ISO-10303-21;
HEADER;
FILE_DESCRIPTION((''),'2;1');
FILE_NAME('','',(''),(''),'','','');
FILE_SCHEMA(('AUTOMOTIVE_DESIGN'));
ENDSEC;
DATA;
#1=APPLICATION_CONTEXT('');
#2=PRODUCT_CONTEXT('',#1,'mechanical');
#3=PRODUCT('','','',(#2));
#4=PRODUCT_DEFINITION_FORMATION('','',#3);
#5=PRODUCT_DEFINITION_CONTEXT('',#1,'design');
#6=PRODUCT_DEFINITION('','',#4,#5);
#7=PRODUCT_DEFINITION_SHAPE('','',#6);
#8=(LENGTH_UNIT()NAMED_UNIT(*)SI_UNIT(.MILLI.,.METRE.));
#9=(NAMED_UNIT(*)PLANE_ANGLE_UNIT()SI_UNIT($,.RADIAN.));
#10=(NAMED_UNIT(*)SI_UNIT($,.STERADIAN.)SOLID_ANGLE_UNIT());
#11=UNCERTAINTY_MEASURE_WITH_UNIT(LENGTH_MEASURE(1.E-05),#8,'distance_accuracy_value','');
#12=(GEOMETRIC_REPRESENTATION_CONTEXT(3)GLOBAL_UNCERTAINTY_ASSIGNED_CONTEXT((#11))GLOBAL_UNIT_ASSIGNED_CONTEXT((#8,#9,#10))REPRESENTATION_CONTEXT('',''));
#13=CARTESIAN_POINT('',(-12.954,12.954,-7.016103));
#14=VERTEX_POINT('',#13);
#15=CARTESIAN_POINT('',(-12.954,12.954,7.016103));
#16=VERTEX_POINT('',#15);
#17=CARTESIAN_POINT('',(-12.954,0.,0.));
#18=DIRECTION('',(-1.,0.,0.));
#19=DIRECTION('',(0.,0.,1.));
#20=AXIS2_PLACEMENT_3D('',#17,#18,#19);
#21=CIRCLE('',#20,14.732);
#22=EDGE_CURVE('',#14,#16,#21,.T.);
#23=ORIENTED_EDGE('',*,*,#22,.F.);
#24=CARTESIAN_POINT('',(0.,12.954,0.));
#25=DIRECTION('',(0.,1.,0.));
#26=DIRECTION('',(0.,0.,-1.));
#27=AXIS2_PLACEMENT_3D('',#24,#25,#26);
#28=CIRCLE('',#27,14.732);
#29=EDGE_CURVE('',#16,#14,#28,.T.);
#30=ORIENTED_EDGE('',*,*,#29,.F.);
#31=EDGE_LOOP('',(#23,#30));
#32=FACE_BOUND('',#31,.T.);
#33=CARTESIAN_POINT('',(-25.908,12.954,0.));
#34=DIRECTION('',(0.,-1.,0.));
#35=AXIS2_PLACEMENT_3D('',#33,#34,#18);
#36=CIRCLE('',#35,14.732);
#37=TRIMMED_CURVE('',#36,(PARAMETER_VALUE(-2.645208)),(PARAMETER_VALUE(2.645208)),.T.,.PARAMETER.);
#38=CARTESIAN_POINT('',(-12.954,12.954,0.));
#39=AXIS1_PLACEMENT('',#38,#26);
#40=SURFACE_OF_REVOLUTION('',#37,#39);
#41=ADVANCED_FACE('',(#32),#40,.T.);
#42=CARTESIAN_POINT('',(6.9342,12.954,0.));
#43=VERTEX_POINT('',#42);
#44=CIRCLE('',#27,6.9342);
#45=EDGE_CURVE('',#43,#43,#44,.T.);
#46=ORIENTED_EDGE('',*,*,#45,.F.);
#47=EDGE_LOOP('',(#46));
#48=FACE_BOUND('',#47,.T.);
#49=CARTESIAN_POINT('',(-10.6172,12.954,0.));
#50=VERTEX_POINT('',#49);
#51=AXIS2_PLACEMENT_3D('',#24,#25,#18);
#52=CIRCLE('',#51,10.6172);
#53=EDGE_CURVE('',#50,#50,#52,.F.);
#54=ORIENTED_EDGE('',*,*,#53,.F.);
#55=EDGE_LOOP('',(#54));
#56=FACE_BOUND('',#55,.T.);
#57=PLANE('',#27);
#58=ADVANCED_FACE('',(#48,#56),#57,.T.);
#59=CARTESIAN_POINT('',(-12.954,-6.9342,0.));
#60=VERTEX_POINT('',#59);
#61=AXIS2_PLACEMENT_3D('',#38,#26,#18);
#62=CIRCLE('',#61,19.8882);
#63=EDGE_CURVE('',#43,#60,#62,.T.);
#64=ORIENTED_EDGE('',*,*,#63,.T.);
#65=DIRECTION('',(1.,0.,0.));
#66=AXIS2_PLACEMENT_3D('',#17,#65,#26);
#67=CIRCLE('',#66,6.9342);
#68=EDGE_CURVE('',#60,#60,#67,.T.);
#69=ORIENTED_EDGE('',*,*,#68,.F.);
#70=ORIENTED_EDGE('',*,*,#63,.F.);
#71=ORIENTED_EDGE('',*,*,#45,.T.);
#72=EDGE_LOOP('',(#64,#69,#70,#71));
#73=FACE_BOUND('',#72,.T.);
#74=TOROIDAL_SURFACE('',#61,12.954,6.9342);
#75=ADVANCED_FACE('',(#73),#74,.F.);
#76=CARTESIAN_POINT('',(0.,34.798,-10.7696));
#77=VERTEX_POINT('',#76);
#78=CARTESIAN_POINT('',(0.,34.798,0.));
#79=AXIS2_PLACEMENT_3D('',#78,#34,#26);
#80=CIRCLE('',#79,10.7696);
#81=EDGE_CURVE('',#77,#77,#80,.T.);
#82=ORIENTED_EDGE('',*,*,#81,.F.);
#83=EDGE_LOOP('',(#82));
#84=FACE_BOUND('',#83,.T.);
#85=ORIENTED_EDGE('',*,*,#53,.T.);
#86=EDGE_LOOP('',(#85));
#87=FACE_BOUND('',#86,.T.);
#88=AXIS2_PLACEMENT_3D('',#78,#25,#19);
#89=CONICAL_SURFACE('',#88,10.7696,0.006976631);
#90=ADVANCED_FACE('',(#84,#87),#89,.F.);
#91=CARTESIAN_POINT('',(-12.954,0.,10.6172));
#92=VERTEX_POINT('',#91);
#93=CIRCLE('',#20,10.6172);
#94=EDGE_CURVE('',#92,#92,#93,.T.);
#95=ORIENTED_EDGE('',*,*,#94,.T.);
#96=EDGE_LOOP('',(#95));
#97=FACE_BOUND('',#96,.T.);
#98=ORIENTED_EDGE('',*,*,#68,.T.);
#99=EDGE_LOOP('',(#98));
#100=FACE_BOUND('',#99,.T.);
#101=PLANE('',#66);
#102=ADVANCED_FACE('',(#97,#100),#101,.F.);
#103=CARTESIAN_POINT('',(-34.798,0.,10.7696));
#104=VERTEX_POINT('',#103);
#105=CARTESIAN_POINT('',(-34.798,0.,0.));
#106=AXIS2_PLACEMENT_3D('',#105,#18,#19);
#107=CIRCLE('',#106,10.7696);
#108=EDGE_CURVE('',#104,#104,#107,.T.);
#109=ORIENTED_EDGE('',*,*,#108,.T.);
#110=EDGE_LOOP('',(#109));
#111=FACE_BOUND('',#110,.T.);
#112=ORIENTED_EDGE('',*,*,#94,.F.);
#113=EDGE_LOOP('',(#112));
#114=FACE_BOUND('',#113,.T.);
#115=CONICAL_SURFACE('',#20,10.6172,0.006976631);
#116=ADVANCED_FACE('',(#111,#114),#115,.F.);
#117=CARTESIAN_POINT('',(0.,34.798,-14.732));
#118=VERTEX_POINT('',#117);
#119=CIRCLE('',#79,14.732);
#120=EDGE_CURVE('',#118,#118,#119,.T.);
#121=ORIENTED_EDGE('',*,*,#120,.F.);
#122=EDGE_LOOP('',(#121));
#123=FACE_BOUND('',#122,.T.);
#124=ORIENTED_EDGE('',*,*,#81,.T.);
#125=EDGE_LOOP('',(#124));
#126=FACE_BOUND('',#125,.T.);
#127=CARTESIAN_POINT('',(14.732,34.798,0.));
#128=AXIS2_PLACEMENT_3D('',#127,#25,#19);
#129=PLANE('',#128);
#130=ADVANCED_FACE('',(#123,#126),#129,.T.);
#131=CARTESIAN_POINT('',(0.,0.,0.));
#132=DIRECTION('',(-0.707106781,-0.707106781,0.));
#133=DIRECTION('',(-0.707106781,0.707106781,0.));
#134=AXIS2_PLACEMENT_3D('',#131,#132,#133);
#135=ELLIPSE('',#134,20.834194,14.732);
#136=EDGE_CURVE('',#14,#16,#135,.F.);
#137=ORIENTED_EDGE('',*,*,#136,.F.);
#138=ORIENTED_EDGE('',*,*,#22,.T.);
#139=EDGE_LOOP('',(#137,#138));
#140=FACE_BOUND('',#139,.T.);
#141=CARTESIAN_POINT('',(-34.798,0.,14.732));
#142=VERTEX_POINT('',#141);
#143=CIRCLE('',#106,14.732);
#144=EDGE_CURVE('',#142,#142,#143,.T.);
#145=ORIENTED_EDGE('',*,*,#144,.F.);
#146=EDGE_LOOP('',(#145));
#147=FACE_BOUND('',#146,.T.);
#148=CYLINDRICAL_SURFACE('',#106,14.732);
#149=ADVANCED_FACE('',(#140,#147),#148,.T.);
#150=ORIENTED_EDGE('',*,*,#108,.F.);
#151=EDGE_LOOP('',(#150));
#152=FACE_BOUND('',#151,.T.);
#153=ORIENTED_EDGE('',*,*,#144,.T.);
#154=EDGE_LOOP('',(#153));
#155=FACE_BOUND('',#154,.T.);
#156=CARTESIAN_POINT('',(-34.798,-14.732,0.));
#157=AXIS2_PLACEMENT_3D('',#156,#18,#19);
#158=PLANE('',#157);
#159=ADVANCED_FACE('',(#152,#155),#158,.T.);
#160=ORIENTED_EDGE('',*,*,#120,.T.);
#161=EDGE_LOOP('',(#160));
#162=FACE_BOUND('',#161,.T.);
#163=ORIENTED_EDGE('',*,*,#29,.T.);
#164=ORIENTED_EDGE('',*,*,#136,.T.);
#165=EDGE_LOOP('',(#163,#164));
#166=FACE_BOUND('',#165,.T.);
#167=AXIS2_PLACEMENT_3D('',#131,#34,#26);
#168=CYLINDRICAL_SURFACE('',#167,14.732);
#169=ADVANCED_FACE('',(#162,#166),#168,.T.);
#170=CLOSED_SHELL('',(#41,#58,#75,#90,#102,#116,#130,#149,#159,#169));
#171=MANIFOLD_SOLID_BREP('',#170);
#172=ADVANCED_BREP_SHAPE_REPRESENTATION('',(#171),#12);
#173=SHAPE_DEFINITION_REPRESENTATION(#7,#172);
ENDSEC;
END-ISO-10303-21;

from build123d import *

# Parameters (mm, degrees)
SKETCH3_R   = 14.732
SKETCH3_R_2 = 6.9342


with BuildPart() as part:
    # Sketch1 → Revolve1 (revolve)
    with BuildSketch(Plane.XY):
        Polygon((-34.798, -14.732), (-12.954, -14.732), (-12.954, -10.6172), (-34.798, -10.7696), align=None)
    revolve(axis=Axis((-34.798, 0, 0), (1, 0, 0)))


with BuildPart() as body_2:
    # Sketch2 → Revolve2 (revolve)
    with BuildSketch(Plane.XY):
        Polygon((10.7696, 34.798), (10.6172, 12.954), (14.732, 12.954), (14.732, 34.798), align=None)
    revolve(axis=Axis((0, 0, 0), (0, 1, 0)))


with BuildPart() as sweep1_tool:
    # Sweep1: sweep along a path in Sketch4
    with BuildLine(Plane.XY) as sweep1_path:
        ThreePointArc((-12.954, 0), (-3.794139, 3.794139), (0, 12.954))
    # Sketch3 → Sweep1 (sweep)
    with BuildSketch(Plane(origin=(-12.954, 0, 0), x_dir=(0, 0, -1), z_dir=(1, 0, 0))):
        Circle(SKETCH3_R)
        Circle(SKETCH3_R_2, mode=Mode.SUBTRACT)
    sweep(path=sweep1_path.line)


with BuildPart() as part_1:
    add(part.part)


with BuildPart() as part_2:
    # Sweep1: joined with sweep1_tool
    add(part_1.part.fuse(sweep1_tool.part, body_2.part, tol=0.00001))


solid = part_2.part
